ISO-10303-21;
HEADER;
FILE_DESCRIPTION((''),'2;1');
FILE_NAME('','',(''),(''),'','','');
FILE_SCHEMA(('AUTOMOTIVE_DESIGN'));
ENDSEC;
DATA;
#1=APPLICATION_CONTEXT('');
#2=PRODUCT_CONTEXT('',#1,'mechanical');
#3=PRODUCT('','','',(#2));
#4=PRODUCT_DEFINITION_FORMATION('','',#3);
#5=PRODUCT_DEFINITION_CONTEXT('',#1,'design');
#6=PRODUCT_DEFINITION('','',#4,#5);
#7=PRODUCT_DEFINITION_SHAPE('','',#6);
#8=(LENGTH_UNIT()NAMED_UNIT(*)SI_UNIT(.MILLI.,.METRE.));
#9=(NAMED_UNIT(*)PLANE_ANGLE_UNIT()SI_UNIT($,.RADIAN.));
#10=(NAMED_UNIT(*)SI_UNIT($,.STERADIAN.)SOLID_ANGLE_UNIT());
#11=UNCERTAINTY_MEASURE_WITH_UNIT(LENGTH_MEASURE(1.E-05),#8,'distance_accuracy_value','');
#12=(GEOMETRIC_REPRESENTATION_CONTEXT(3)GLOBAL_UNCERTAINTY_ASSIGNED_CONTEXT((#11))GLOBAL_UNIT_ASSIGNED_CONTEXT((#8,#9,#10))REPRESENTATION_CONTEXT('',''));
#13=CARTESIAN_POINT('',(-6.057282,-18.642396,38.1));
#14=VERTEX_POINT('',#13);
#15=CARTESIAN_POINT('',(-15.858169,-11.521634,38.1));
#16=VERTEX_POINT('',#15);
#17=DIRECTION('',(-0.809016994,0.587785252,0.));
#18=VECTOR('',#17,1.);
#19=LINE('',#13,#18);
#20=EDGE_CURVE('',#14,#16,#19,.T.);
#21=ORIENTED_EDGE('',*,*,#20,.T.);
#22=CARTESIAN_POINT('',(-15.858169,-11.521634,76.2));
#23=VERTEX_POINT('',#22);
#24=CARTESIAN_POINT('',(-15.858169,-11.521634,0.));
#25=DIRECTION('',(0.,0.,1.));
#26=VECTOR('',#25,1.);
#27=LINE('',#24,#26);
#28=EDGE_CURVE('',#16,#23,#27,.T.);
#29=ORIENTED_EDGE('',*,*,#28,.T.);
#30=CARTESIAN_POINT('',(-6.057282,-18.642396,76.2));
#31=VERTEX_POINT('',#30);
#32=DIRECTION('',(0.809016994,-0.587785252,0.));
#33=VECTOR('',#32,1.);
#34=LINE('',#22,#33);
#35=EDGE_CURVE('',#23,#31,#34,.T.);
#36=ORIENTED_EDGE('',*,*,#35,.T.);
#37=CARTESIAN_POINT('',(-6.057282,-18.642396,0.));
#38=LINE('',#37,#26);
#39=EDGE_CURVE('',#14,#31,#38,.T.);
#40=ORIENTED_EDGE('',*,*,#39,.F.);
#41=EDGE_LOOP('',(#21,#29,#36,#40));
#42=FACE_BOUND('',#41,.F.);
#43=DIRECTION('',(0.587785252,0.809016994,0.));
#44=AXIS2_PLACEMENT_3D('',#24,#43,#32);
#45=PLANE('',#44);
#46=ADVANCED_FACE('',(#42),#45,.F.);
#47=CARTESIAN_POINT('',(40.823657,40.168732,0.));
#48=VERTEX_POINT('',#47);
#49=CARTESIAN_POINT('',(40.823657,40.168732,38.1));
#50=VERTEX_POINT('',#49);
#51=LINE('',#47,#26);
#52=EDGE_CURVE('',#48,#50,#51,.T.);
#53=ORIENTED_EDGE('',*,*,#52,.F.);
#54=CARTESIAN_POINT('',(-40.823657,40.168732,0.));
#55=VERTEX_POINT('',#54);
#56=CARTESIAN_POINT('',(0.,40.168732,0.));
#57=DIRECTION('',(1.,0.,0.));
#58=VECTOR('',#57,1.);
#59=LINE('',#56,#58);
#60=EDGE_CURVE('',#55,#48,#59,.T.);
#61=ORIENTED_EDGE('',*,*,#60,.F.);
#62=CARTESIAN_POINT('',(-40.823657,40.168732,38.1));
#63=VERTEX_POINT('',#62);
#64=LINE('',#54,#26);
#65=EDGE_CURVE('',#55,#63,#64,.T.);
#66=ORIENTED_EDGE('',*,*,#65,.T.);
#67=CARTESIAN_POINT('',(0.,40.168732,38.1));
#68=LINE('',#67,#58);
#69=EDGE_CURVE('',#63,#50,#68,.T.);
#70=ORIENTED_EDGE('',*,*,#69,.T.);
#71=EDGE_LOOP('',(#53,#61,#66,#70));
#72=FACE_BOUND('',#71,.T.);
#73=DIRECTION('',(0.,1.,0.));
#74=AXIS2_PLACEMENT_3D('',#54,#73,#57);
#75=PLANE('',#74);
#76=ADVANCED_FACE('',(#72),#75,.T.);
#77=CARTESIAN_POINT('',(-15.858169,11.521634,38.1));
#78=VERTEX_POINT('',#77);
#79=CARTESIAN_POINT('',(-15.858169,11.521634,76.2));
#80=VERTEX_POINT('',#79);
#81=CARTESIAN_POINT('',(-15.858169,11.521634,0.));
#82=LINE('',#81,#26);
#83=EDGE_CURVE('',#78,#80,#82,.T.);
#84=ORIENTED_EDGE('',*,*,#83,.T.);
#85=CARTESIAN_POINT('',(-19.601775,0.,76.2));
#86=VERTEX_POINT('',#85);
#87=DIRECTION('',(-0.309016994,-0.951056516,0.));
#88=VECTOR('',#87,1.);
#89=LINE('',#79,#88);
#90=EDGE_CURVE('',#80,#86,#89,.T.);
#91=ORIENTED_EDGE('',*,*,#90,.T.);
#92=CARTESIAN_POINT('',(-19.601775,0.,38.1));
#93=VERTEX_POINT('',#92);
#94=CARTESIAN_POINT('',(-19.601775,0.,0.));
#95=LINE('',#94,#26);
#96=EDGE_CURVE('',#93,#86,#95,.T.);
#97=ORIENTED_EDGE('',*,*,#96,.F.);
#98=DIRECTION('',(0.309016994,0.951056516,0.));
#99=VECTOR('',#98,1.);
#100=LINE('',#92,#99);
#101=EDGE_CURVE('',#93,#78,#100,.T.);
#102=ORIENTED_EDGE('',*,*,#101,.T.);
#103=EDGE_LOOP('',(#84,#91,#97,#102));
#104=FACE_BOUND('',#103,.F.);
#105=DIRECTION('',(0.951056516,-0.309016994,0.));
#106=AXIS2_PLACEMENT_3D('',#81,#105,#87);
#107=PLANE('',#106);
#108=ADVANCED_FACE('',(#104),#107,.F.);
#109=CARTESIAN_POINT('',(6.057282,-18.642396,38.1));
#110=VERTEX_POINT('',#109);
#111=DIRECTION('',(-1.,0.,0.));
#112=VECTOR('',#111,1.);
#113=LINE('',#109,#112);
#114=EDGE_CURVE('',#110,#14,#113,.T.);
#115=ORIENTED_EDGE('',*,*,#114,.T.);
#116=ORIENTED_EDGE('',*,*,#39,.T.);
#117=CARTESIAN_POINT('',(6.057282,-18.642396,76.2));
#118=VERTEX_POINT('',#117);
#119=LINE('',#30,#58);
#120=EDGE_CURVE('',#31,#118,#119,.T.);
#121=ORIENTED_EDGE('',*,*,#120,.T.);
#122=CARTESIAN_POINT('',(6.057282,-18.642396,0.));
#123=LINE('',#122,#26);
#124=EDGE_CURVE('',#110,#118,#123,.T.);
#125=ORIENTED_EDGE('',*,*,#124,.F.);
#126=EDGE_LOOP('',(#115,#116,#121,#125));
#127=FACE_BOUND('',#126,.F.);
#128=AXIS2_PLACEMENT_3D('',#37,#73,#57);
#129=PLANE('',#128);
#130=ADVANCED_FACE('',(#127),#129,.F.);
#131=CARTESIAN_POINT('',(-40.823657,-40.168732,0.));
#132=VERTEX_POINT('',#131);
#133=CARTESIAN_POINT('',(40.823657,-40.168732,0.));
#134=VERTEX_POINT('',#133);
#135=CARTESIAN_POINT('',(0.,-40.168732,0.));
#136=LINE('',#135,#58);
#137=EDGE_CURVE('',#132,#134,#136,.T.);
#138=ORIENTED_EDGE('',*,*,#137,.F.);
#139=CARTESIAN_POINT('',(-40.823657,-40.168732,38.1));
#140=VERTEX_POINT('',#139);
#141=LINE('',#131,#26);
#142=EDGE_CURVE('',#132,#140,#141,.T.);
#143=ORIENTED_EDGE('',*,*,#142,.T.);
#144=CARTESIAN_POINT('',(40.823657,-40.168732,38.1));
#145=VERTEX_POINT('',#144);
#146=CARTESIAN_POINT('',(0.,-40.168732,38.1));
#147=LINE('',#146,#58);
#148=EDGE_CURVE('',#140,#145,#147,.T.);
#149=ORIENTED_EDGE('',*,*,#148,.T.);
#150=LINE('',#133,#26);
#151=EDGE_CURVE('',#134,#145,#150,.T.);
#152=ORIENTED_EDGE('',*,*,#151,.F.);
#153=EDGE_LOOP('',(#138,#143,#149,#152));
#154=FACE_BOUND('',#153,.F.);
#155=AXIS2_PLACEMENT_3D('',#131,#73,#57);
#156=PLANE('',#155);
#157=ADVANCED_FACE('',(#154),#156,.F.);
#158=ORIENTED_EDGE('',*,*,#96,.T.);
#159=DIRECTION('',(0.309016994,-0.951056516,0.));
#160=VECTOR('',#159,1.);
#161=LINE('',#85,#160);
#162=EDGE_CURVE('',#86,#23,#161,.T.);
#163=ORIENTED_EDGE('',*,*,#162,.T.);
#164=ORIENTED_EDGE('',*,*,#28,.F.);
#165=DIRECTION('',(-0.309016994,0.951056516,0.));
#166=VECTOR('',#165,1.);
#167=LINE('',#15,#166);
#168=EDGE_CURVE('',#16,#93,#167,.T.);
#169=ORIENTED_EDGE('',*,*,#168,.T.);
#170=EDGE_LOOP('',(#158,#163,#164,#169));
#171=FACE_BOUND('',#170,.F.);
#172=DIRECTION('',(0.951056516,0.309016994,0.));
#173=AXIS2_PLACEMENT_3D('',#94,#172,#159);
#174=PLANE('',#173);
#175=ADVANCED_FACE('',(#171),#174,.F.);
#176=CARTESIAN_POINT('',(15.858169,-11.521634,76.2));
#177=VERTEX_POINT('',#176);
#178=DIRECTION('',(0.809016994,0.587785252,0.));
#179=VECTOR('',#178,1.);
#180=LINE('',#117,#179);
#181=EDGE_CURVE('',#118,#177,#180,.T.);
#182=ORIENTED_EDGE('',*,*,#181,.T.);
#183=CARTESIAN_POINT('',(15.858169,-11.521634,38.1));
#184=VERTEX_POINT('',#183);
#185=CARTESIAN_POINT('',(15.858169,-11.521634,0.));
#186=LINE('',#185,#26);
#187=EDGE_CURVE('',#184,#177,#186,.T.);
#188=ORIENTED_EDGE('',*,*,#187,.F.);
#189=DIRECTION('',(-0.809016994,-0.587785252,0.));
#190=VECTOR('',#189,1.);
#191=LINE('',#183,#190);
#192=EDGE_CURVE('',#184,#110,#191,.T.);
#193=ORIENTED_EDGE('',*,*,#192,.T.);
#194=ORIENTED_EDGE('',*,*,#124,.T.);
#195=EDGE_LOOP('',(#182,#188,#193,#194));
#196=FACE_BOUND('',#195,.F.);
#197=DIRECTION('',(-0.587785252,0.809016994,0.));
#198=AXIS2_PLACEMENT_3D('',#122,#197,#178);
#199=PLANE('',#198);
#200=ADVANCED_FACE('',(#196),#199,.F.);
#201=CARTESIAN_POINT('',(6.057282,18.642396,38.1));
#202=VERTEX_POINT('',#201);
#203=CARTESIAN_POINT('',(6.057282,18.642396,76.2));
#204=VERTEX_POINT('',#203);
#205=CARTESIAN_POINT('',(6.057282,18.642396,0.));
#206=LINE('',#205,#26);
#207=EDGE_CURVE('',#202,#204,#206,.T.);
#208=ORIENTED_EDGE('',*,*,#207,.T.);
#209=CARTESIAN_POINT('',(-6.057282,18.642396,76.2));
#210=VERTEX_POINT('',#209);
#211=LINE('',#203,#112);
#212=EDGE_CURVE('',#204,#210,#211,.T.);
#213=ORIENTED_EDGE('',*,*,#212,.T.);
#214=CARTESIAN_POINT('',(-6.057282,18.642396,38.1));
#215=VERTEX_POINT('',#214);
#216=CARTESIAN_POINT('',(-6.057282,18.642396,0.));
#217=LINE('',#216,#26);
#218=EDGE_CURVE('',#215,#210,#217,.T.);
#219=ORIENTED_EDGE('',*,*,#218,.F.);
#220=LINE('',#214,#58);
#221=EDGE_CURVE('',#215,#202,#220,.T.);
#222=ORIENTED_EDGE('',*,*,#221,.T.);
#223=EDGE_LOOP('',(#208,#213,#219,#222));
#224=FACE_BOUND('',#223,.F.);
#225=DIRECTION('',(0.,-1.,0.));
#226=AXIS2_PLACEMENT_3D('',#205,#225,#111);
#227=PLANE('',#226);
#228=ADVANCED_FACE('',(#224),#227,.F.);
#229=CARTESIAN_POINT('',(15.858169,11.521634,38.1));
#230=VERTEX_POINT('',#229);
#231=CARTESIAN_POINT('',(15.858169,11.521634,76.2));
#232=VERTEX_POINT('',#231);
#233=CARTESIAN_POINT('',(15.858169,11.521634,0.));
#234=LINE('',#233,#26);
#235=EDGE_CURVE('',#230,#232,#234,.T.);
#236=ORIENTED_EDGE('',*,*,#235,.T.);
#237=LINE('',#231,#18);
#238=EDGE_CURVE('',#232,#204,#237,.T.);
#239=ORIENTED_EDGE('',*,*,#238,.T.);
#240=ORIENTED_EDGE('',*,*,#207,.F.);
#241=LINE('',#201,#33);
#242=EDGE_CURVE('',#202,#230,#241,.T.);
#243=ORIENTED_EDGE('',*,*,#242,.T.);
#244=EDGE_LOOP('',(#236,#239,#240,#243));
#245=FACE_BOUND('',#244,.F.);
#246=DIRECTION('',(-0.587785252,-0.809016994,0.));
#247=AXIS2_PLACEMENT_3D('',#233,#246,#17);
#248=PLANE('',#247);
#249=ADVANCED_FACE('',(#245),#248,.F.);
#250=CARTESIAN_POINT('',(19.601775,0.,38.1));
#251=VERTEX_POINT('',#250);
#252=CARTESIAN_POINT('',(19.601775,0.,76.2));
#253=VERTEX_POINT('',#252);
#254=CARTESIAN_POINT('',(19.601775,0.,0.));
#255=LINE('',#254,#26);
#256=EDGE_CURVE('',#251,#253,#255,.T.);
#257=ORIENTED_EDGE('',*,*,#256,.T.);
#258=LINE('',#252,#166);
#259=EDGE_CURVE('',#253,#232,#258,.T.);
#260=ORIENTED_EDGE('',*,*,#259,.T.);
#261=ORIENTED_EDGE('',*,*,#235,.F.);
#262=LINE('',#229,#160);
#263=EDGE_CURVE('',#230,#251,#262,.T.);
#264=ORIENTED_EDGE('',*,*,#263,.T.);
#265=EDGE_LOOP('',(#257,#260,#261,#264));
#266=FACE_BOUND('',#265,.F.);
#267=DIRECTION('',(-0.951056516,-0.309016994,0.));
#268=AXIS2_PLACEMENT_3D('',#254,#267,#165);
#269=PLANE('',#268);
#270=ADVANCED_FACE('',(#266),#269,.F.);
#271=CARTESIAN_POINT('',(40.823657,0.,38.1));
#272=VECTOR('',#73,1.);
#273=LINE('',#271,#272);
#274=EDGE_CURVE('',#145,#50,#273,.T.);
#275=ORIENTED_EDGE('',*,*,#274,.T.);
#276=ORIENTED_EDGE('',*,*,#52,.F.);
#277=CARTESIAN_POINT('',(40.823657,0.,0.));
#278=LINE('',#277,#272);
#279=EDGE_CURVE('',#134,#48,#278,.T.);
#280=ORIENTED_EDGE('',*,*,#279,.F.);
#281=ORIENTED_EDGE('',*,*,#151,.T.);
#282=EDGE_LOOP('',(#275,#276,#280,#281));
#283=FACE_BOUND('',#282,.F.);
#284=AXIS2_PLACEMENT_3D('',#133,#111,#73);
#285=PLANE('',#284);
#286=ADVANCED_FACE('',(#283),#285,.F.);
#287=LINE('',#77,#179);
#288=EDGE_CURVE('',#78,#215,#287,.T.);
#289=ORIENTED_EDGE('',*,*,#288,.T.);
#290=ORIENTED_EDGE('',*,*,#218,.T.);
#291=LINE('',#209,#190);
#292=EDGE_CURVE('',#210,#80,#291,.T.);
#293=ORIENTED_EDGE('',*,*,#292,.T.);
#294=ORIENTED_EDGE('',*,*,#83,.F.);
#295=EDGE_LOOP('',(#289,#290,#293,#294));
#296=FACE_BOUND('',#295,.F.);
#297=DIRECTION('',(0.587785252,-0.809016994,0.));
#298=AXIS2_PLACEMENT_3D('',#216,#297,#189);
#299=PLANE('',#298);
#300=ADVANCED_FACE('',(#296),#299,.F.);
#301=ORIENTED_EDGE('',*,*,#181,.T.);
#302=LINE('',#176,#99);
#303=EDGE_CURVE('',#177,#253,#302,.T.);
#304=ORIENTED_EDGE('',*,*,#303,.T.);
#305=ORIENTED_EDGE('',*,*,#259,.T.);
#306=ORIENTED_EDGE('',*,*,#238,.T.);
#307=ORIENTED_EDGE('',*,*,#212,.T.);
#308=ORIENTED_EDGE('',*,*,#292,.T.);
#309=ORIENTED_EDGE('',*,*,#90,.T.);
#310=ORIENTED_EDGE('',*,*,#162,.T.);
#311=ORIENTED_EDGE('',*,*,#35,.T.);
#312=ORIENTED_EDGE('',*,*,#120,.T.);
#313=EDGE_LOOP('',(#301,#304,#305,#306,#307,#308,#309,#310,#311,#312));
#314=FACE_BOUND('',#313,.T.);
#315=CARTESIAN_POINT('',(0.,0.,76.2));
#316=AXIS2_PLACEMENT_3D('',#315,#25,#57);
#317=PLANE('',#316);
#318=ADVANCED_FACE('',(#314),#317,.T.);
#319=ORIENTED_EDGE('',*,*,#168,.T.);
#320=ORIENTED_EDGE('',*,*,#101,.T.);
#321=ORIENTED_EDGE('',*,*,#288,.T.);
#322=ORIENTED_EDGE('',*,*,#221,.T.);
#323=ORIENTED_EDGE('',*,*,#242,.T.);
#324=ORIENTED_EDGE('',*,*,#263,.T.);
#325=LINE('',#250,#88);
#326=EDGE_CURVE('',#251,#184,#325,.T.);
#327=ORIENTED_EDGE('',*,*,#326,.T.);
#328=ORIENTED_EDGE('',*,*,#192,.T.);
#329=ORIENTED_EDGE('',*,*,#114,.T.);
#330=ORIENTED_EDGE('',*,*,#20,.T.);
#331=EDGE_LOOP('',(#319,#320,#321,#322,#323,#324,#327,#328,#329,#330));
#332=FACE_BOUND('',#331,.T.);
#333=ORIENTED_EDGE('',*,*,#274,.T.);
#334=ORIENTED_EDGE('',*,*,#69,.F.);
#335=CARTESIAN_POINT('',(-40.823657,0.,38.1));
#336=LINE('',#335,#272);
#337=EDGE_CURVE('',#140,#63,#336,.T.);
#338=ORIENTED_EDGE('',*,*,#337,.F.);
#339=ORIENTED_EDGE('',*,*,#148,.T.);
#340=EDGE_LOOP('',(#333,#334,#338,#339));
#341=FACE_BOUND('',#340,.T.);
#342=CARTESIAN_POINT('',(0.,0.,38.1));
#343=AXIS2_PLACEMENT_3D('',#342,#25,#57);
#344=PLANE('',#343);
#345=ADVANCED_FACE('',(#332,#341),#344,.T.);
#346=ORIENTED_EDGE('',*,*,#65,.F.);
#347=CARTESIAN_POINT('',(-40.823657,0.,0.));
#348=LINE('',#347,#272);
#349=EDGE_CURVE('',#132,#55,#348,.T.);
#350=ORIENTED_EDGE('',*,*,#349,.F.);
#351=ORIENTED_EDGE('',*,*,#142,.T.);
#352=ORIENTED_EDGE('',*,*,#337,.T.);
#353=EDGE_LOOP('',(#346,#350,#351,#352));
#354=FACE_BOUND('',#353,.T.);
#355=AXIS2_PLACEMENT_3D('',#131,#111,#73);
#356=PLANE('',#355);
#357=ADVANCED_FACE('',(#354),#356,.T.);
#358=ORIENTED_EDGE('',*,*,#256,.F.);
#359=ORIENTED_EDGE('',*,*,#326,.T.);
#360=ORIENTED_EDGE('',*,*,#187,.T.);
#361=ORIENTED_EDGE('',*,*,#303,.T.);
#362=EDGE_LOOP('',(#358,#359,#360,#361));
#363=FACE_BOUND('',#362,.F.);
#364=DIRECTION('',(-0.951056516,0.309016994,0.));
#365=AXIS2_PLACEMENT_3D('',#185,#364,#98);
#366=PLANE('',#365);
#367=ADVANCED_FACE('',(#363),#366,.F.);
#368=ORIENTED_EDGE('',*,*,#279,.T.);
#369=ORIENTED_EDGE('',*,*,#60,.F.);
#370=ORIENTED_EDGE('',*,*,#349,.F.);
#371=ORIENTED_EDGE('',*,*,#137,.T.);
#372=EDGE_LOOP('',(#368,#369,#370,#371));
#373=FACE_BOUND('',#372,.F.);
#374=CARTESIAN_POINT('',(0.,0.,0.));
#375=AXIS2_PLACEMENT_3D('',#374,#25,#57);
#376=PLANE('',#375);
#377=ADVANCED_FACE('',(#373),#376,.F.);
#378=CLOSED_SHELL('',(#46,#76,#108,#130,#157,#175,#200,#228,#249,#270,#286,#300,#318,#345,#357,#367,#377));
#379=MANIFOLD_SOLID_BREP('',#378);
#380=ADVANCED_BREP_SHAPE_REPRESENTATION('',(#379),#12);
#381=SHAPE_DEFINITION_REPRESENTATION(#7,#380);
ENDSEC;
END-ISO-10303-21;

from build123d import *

# Parameters (mm, degrees)
F0_W     = 81.6473141313
F0_H     = 80.3374648094
F1_DEPTH = 38.1
F3_DEPTH = 76.2


# Not quite as in the source:
# - the program builds the solid bodies; features that only make, move or delete a surface that nothing else refers to are left out


with BuildPart() as f1:
    # F0 (on Top) → F1 (new body)
    with BuildSketch(Plane.XY):
        Rectangle(F0_W, F0_H)
        Polygon((-15.8581690014, 11.5216341958), (-6.0572815592, 18.6423957348), (6.0572815592, 18.6423957348), (15.8581690014, 11.5216341958), (19.6017748844, 0), (15.8581690014, -11.5216341958), (6.0572815592, -18.6423957348), (-6.0572815592, -18.6423957348), (-15.8581690014, -11.5216341958), (-19.6017748844, 0), align=None, mode=Mode.SUBTRACT)
    extrude(amount=F1_DEPTH)

    # F0 (on Top) → F3 (join)
    with BuildSketch(Plane.XY):
        Polygon((6.0572815592, 18.6423957348), (-6.0572815592, 18.6423957348), (-15.8581690014, 11.5216341958), (-19.6017748844, 0), (-15.8581690014, -11.5216341958), (-6.0572815592, -18.6423957348), (6.0572815592, -18.6423957348), (15.8581690014, -11.5216341958), (19.6017748844, 0), (15.8581690014, 11.5216341958), align=None)
    extrude(amount=F3_DEPTH)


solid = f1.part
